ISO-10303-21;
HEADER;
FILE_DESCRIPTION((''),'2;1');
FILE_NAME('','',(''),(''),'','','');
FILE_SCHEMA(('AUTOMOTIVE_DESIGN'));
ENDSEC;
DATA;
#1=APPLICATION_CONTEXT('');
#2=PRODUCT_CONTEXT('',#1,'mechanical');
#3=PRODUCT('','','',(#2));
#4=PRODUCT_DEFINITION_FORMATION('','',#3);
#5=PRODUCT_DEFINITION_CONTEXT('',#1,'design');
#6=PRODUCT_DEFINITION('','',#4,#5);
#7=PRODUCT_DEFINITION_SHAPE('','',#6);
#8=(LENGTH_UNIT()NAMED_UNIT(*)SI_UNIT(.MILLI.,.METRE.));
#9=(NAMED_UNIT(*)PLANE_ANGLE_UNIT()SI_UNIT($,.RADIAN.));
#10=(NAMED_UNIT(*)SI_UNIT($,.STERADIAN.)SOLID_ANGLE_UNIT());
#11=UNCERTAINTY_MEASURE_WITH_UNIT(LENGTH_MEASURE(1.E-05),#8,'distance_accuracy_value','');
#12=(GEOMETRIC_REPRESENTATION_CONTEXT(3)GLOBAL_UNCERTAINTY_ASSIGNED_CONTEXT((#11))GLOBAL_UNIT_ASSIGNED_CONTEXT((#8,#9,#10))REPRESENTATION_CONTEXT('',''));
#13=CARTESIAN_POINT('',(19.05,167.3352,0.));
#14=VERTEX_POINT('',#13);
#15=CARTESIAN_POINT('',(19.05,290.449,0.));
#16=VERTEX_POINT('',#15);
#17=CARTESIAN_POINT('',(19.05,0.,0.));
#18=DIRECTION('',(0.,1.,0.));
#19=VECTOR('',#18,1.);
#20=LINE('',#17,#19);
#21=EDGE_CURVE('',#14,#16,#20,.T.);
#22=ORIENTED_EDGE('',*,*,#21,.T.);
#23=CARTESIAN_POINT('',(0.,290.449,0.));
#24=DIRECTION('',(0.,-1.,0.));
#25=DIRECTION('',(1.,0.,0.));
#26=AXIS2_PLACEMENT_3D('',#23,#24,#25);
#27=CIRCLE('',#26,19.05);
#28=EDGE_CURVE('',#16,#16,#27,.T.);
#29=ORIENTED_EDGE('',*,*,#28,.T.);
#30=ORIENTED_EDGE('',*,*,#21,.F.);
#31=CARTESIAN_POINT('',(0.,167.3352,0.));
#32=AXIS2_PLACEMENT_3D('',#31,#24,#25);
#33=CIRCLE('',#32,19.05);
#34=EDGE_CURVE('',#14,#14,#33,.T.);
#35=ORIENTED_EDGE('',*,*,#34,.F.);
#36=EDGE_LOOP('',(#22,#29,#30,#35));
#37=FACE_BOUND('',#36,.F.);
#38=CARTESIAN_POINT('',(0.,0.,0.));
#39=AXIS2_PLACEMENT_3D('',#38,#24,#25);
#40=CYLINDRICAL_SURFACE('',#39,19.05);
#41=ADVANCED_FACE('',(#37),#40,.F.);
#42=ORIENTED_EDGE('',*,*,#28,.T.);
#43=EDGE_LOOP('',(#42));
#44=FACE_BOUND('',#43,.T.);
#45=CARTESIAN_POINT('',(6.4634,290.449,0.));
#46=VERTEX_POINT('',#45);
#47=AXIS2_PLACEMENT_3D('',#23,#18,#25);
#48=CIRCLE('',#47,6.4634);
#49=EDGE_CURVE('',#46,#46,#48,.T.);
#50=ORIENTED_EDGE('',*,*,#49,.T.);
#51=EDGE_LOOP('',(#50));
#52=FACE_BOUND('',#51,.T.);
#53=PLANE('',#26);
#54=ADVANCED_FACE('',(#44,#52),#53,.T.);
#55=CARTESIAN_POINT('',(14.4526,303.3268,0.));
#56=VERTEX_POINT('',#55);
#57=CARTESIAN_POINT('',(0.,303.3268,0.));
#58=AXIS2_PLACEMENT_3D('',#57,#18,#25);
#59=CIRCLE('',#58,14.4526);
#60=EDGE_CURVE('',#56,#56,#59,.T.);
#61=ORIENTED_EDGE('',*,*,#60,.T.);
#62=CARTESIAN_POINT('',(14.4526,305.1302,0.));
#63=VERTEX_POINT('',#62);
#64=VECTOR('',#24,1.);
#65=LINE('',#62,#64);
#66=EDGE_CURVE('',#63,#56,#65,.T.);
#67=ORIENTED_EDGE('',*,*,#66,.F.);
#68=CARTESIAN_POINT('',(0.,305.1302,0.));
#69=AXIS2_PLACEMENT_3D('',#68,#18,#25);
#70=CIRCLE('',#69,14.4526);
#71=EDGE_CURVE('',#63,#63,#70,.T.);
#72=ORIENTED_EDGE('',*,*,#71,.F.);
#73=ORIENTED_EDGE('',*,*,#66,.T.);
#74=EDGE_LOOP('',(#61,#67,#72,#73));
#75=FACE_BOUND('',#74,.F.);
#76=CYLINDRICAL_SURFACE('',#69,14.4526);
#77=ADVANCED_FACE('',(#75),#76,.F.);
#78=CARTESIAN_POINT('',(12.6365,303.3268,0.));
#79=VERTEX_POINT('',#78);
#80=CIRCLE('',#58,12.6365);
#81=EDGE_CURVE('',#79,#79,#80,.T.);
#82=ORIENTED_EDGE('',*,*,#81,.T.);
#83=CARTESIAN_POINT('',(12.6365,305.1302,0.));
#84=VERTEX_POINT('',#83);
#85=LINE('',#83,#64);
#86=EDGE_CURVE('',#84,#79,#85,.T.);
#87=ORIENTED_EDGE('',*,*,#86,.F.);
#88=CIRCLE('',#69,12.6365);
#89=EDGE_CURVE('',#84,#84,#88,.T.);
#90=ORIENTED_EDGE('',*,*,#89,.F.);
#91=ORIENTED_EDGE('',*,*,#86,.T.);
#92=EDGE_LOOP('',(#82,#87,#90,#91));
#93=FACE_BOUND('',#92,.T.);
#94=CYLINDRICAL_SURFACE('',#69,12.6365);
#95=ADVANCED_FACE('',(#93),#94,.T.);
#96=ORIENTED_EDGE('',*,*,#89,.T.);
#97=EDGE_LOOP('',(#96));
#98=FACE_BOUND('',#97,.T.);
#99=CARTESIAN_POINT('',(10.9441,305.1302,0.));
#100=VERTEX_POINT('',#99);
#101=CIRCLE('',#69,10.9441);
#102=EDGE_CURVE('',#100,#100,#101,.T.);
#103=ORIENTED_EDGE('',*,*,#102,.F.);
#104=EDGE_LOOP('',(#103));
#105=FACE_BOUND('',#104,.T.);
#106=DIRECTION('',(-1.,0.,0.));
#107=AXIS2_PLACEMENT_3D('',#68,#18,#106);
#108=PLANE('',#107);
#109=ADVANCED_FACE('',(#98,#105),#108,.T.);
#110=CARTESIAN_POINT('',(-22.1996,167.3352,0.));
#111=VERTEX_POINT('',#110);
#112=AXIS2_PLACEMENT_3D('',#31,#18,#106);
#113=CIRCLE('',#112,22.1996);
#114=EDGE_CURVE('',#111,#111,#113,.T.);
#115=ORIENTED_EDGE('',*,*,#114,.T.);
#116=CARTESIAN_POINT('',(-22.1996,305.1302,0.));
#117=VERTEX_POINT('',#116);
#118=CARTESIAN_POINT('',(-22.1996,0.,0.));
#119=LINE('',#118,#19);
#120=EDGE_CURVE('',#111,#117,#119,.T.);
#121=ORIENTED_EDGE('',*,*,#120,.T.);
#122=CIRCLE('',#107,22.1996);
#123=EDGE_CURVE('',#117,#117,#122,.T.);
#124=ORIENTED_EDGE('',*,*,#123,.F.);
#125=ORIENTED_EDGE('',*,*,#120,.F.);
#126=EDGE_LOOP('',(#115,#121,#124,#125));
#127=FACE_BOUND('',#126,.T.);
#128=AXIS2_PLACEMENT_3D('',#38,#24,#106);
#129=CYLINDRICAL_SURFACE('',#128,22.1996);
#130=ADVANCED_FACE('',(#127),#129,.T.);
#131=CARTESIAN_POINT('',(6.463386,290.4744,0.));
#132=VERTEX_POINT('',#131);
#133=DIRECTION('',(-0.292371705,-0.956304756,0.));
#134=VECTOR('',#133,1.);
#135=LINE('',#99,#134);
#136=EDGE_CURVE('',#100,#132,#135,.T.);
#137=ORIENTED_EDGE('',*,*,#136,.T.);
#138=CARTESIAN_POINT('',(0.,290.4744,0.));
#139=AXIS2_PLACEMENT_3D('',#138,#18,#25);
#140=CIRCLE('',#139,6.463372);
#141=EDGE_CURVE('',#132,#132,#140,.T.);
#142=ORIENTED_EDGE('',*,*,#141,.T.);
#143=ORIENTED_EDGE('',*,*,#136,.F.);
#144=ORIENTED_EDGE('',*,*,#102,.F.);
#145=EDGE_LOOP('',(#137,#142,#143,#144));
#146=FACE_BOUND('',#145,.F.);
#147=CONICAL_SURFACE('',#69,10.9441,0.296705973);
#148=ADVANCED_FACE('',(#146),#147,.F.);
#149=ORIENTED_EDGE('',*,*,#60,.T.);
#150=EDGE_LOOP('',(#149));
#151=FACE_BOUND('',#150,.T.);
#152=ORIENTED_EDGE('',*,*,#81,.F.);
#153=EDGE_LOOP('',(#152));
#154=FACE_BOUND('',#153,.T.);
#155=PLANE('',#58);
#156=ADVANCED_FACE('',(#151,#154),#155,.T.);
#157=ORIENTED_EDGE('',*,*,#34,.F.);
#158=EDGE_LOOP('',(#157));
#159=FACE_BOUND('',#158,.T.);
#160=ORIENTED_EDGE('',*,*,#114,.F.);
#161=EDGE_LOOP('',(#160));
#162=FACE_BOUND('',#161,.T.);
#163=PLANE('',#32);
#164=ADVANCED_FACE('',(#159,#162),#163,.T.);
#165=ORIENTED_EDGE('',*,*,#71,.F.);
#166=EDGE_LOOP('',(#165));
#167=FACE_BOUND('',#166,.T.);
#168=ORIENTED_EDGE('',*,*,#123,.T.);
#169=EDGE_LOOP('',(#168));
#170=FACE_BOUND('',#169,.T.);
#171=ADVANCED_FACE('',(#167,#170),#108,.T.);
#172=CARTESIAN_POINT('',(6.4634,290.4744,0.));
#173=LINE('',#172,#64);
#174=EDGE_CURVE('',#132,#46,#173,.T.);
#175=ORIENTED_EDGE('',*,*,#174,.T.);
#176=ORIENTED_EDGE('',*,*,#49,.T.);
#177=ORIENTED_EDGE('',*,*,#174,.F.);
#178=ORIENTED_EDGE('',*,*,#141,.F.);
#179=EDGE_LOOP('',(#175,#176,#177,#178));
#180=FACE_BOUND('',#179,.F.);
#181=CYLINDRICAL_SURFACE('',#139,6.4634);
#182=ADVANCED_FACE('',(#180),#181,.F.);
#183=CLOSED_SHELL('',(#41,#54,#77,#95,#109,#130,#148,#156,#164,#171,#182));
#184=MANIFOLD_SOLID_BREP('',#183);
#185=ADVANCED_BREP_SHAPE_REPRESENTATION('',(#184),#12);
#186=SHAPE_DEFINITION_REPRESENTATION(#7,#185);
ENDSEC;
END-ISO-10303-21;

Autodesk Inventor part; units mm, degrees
ref_plane "YZ Plane" through (0, 0, 0) normal (1, 0, 0) x (0, 1, 0)
ref_plane "XZ Plane" through (0, 0, 0) normal (0, 1, 0) x (-1, 0, 0)
ref_plane "XY Plane" through (0, 0, 0) normal (0, 0, 1) x (1, 0, 0)
sketch "Sketch1" plane through (0, 0, 0) normal (0, 1, 0) x (-1, 0, 0)
  circle A0 centre (0, 0) radius 22.1996
  dimension "d0" = 44.3992
extrude "Extrusion1" add sketch "Sketch1" along normal blind 305.1302
sketch "Sketch2" plane through (0, 305.1302, 0) normal (0, 1, 0) x (1, 0, 0)
  circle A0 centre (0, 0) radius 14.4526
  circle A1 centre (0, 0) radius 12.6365
  dimension "d3" = 28.9052
  dimension "d4" = 25.273
extrude "Extrusion2" cut sketch "Sketch2" against normal blind 1.8034
sketch "Sketch3" plane through (0, 305.1302, 0) normal (0, 1, 0) x (1, 0, 0)
  circle A0 centre (0, 0) radius 10.9441
  circle A1 centre (0, 0) radius 12.6365 projected
  dimension "d7" = 1.6924
extrude "Extrusion3" cut sketch "Sketch3" against normal blind 14.6558 draft -17 contours A0
sketch "Sketch5" plane through (0, 290.4744, 0) normal (0, 1, 0) x (1, 0, 0)
  circle A0 centre (0, 0) radius 6.4634
extrude "Extrusion4" cut sketch "Sketch5" against normal blind 355.6
sketch "Sketch6" plane through (0, 0, 0) normal (0, -1, 0) x (1, 0, 0)
  circle A0 centre (0, 0) radius 19.05
  circle A1 centre (0, 0) radius 22.1996
  dimension "d13" = 38.1
  dimension "d14" = 44.3992
extrude "Extrusion5" cut sketch "Sketch6" against normal blind 290.449 contours A0
sketch "Sketch7" plane through (0, 0, 0) normal (0, -1, 0) x (1, 0, 0)
  circle A0 centre (0, 0) radius 22.1996
extrude "Extrusion6" cut sketch "Sketch7" against normal blind 167.3352
sketch "Sketch8" plane through (0, 305.1302, 0) normal (0, 1, 0) x (1, 0, 0)
  point P0 (0, 0)
  point P1 (18.415, 0)
  point P2 (9.2075, 15.9479)
  point P3 (-9.2075, 15.9479)
  point P4 (-18.415, 0)
  point P5 (-9.2075, -15.9479)
  point P6 (9.2075, -15.9479)
  dimension "d19" = 18.415
  dimension "d22" = 360
properties part number "LED housing 1"
